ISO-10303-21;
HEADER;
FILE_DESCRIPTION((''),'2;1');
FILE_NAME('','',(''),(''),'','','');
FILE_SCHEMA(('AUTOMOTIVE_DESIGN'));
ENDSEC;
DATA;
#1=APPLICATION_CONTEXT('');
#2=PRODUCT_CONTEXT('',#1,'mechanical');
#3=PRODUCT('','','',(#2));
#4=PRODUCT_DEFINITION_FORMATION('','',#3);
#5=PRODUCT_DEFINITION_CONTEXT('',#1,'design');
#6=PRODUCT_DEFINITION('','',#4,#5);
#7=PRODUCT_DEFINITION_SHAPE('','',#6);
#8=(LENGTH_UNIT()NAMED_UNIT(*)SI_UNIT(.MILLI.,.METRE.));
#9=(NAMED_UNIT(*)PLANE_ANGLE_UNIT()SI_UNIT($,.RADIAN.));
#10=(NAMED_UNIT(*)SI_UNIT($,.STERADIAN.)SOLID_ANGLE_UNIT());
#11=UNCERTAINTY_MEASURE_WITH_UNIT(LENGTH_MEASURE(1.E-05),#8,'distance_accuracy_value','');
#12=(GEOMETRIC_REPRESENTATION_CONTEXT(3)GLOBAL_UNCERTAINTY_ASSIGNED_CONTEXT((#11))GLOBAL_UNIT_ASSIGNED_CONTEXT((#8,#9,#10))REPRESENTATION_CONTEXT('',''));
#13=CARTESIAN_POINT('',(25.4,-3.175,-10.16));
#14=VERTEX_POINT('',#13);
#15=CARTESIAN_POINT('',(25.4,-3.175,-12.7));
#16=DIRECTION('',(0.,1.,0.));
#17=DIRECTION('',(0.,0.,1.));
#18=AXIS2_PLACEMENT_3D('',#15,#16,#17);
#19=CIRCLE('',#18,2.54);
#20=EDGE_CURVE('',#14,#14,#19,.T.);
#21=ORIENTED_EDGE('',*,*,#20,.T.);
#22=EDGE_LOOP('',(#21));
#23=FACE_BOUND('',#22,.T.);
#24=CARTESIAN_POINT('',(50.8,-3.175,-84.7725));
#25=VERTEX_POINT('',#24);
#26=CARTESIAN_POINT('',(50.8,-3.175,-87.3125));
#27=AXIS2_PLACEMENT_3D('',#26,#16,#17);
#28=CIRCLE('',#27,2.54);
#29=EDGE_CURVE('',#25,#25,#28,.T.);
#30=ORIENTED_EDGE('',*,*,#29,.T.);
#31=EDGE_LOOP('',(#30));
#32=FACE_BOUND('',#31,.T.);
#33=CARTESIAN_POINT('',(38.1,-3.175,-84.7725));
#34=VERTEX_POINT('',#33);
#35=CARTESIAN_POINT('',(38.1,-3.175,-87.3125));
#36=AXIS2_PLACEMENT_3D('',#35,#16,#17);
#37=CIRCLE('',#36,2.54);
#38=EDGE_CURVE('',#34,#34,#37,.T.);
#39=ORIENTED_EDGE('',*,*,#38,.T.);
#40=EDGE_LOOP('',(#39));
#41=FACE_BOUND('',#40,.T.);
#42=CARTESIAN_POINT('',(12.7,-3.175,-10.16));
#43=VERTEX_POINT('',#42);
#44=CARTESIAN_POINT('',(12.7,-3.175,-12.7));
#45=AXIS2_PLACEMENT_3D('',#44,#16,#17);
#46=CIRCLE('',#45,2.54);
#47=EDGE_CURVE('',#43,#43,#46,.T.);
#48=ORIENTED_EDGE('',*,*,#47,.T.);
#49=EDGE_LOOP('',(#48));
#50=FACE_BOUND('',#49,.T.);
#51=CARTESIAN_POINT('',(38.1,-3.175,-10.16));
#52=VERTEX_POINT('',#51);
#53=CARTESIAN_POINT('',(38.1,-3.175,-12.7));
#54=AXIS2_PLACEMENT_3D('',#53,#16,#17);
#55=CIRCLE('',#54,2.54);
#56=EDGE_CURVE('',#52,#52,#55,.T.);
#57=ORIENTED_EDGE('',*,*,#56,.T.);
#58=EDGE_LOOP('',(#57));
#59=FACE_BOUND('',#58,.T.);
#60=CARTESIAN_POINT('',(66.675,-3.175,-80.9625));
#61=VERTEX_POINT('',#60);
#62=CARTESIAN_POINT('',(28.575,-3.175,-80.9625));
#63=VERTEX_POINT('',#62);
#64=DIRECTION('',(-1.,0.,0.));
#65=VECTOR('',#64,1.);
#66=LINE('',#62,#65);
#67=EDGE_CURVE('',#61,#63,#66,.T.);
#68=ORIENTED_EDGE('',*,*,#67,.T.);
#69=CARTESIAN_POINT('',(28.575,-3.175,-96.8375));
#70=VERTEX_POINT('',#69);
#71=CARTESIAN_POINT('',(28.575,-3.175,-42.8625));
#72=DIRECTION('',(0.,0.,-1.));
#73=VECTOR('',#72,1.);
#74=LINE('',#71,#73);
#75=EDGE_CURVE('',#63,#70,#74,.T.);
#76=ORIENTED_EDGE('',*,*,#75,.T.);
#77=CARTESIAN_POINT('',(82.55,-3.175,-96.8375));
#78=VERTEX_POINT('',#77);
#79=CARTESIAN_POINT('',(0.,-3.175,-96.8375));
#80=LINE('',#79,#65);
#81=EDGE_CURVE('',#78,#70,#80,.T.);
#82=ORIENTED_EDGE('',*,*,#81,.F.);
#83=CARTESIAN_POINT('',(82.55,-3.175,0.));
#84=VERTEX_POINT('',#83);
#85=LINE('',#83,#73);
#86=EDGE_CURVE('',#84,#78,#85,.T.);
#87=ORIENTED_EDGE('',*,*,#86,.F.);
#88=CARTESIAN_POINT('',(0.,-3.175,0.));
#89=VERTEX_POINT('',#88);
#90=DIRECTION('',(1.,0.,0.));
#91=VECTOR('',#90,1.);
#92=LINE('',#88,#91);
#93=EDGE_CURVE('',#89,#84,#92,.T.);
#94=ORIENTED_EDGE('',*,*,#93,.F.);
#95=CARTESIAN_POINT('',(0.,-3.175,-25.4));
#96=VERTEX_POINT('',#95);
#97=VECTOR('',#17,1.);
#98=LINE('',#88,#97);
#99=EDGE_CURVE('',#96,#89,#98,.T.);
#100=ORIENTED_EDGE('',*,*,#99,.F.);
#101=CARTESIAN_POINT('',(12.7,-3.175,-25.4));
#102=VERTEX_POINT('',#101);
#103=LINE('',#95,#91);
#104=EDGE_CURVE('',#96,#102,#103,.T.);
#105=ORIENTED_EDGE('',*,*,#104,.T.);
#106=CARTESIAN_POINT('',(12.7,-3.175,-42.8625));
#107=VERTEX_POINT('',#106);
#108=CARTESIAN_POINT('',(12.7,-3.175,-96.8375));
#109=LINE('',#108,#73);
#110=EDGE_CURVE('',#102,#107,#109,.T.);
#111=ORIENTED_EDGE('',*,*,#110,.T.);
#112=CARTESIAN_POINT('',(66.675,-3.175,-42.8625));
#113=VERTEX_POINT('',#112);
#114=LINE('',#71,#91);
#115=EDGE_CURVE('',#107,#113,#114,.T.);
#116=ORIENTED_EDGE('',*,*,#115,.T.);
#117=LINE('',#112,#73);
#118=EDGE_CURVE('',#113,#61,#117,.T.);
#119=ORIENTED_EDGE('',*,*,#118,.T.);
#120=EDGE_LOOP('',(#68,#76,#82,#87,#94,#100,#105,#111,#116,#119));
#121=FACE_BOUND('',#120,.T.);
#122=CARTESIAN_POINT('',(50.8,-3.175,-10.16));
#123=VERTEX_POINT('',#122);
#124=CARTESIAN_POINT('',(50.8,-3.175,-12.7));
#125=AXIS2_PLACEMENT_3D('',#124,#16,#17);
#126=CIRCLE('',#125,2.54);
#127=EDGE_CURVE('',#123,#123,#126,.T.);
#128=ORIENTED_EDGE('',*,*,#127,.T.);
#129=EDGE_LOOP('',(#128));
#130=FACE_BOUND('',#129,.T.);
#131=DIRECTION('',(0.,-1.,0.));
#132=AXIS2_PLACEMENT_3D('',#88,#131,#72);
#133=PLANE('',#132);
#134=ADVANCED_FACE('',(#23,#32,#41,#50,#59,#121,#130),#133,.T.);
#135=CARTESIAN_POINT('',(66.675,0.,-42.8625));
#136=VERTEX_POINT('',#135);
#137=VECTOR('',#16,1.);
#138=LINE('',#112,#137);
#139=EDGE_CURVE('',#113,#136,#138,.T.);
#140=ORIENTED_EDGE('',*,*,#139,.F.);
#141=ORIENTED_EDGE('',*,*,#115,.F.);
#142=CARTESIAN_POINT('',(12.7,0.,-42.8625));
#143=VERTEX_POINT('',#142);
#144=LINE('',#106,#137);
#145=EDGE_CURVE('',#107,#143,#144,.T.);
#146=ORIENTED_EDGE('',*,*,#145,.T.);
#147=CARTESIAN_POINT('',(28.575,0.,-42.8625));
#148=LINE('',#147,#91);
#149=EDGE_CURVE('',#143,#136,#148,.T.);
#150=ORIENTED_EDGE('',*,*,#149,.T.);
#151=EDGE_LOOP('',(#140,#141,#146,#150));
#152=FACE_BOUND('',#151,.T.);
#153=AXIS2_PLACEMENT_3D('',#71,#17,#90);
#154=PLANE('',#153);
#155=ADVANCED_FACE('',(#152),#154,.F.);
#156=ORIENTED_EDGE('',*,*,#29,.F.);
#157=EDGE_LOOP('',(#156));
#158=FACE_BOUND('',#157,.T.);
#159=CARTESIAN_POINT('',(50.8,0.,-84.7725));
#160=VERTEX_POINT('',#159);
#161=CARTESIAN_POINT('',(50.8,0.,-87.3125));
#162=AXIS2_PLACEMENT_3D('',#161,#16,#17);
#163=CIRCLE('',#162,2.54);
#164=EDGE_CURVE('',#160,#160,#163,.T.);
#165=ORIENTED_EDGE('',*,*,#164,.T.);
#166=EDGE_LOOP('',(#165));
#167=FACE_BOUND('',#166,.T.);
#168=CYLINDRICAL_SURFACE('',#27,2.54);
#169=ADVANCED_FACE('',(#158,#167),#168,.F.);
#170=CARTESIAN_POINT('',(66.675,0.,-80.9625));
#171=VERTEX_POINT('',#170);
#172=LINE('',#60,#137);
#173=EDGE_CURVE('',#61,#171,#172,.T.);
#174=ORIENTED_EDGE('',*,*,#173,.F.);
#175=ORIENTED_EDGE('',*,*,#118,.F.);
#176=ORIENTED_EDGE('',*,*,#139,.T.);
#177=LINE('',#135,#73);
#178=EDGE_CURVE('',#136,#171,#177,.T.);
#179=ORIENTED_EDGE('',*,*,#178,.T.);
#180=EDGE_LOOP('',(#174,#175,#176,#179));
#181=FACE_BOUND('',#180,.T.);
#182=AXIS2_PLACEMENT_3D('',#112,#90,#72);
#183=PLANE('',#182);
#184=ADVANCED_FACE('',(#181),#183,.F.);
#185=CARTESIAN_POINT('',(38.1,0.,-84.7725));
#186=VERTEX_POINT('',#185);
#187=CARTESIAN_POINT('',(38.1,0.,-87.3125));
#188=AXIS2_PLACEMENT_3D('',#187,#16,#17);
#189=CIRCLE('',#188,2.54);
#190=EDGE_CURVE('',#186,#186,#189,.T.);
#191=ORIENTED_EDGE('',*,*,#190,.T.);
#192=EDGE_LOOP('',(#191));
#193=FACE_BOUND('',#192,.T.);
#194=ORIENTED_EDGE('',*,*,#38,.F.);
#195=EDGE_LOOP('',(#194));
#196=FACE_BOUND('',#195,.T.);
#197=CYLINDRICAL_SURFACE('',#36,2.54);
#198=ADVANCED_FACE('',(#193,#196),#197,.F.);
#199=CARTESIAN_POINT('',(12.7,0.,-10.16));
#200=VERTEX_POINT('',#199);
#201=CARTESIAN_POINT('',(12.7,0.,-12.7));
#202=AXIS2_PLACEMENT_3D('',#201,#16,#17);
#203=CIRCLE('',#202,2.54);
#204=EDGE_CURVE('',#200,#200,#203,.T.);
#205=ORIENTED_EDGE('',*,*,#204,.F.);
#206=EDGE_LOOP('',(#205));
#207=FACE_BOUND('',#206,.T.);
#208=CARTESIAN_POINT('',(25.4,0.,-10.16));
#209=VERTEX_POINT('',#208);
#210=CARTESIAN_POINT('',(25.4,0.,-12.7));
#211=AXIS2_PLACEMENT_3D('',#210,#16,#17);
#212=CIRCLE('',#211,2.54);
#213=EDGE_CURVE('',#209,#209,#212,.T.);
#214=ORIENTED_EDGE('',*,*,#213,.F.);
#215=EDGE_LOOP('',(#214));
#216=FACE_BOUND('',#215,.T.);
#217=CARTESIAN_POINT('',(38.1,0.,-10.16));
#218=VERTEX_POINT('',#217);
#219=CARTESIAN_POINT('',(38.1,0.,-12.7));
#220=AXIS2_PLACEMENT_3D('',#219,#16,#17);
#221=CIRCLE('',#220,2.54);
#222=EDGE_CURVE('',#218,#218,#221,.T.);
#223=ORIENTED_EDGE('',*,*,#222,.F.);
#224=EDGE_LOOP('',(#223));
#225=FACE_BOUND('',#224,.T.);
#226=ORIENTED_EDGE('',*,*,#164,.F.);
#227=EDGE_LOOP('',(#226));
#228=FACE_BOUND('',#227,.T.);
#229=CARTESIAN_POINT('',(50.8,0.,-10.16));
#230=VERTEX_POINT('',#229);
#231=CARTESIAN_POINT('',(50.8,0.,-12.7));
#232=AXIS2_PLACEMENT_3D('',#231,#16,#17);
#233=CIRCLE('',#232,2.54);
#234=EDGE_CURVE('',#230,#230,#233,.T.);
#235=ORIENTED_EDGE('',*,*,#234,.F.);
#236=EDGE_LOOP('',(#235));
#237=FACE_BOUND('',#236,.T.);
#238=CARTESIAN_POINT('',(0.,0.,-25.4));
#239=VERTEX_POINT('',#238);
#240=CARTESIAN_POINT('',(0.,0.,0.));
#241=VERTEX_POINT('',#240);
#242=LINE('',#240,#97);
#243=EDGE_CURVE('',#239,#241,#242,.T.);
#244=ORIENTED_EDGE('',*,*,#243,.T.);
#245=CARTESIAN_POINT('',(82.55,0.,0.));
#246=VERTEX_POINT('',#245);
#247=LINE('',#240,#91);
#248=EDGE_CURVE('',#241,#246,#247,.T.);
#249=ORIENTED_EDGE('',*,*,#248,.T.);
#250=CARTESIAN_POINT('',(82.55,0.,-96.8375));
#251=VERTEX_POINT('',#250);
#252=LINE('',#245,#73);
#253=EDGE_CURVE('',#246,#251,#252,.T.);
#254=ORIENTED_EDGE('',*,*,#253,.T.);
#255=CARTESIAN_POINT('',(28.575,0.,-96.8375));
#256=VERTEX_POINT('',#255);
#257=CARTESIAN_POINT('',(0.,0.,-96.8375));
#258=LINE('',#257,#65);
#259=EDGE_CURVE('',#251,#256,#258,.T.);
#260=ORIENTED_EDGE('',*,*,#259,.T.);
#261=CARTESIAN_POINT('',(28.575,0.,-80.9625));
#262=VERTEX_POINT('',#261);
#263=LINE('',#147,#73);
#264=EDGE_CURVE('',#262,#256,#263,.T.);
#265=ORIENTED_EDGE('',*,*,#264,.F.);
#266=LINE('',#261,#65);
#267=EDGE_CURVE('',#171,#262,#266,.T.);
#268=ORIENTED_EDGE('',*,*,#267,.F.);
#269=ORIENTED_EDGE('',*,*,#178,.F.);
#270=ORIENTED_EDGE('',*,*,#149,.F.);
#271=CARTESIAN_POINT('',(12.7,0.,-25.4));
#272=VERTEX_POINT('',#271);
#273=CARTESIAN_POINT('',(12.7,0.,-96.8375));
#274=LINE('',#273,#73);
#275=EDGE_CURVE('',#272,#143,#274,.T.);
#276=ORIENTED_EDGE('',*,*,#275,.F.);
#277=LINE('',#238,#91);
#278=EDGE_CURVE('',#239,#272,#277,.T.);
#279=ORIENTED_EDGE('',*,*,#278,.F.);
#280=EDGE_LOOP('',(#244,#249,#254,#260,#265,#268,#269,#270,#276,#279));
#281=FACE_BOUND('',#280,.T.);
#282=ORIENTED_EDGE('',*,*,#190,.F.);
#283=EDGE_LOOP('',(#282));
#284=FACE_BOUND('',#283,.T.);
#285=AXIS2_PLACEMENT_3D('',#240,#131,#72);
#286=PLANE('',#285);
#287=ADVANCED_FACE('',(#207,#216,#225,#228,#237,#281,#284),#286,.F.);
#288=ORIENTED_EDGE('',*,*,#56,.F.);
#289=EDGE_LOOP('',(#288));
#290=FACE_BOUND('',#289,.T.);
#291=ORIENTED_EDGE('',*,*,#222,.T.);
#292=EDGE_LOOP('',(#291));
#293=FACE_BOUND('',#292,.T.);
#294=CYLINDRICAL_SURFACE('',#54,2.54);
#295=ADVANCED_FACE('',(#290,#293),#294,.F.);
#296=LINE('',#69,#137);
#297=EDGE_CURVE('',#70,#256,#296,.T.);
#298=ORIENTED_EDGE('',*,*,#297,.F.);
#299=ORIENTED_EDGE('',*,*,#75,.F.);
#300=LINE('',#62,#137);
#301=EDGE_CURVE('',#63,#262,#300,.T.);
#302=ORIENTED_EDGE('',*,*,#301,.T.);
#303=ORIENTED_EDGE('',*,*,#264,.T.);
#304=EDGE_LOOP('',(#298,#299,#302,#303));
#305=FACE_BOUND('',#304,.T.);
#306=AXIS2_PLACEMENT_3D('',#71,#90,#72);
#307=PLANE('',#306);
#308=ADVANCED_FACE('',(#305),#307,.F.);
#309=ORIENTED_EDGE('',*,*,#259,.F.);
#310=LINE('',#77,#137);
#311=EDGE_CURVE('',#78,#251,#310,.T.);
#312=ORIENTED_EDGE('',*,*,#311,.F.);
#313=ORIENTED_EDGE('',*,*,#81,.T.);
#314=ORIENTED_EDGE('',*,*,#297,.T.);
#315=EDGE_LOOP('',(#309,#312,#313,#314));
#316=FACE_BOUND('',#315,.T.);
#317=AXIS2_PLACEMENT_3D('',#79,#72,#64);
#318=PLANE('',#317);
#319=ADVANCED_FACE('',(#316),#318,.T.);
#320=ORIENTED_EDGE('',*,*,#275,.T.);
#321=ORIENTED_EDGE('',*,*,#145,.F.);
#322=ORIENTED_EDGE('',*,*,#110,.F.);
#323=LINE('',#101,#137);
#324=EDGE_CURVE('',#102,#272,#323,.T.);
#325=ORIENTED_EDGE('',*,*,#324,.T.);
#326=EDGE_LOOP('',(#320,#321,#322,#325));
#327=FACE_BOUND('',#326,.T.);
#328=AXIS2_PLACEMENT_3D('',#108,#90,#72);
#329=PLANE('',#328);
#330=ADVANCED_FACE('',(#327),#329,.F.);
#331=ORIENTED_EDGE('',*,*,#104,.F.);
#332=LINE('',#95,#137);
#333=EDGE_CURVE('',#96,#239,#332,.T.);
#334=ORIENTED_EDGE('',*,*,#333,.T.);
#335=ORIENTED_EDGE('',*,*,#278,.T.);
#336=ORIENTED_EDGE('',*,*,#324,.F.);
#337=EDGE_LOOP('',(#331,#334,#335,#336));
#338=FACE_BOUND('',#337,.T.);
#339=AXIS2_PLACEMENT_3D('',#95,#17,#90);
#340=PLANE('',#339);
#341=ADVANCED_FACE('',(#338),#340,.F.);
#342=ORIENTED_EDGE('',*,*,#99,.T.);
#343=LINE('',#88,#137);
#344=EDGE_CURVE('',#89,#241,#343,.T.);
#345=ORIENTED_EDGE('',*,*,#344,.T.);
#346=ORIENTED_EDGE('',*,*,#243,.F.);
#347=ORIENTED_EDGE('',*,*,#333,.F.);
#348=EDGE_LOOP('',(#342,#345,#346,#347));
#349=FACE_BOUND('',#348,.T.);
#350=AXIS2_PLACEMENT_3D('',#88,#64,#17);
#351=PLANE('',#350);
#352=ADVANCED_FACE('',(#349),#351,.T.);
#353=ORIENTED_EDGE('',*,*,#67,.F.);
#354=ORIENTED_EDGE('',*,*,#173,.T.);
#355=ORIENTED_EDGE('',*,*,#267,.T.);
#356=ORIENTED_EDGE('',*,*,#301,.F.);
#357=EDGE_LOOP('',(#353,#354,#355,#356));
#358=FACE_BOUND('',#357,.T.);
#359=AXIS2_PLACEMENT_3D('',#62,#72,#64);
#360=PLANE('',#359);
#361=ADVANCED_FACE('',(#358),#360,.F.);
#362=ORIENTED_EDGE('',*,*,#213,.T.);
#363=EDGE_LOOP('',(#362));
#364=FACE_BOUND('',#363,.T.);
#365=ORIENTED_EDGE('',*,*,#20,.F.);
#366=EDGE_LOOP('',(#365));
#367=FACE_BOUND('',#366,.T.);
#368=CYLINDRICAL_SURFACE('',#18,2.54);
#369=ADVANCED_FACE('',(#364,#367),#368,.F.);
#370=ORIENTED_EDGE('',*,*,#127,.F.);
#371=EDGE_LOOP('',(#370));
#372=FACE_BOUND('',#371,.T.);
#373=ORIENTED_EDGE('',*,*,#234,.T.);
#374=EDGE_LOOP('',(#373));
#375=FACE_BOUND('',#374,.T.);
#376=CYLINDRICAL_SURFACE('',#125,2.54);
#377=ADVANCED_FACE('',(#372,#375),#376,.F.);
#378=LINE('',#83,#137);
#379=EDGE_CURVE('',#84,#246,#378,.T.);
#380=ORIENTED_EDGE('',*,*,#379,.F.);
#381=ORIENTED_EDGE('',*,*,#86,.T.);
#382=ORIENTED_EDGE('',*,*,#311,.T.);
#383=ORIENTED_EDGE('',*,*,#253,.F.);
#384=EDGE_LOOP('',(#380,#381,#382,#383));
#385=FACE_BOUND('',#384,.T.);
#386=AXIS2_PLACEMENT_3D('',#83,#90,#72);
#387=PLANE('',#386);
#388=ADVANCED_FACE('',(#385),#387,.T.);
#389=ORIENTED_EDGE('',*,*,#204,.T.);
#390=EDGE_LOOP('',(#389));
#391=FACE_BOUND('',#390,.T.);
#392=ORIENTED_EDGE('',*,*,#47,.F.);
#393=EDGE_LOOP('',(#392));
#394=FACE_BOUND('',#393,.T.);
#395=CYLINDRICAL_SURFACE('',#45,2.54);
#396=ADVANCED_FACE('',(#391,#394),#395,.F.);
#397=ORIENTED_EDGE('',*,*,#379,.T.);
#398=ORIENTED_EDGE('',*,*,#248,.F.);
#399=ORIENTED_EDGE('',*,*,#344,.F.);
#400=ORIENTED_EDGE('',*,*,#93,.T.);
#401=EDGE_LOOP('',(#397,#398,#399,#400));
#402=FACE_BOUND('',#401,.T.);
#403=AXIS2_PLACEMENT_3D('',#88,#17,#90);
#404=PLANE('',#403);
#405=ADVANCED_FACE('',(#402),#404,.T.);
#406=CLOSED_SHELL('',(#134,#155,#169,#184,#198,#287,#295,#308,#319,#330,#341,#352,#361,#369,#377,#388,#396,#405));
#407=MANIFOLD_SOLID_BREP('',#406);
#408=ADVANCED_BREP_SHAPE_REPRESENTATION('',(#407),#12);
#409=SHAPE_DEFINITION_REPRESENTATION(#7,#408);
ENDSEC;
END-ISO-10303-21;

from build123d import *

# Parameters (mm, degrees)
SKETCH1_W          = 82.55
SKETCH1_H          = 96.8375
SKETCH1_W_2        = 38.1
SKETCH1_H_2        = 38.1
BASE_FLANGE2_DEPTH = 3.175
SKETCH3_W          = 12.7
SKETCH3_H          = 71.4375
CUT_EXTRUDE2_DEPTH = 128.287409162
SKETCH2_R          = 2.54
CUT_EXTRUDE1_DEPTH = 128.287409162
SKETCH5_W          = 15.875
SKETCH5_H          = 53.975
CUT_EXTRUDE6_DEPTH = 128.287409162
SKETCH7_R          = 2.54
CUT_EXTRUDE7_DEPTH = 128.287409162


# Sheet-metal steps are written as plain solids
with BuildPart() as part:
    # Base-Flange2: sheet metal written as solids
    # Sketch1 → Base-Flange2 (new body)
    with BuildSketch(Plane(origin=(0, 0, 0), x_dir=(1, 0, 0), z_dir=(0, 1, 0))):
        with Locations((41.275, 48.41875)):
            Rectangle(SKETCH1_W, SKETCH1_H)
        with Locations((47.625, 61.9125)):
            Rectangle(SKETCH1_W_2, SKETCH1_H_2, mode=Mode.SUBTRACT)
    extrude(amount=-BASE_FLANGE2_DEPTH)

    # Sketch3 → Cut-Extrude2 (cut, through all)
    with BuildSketch(Plane(origin=(0, 0, 0), x_dir=(1, 0, 0), z_dir=(0, 1, 0))):
        with Locations((6.35, 61.11875)):
            Rectangle(SKETCH3_W, SKETCH3_H)
    extrude(amount=-CUT_EXTRUDE2_DEPTH, mode=Mode.SUBTRACT)

    # Sketch2 → Cut-Extrude1 (cut, through all)
    with BuildSketch(Plane(origin=(0, 0, 0), x_dir=(1, 0, 0), z_dir=(0, 1, 0))):
        with Locations(Location((12.7, 12.7, 0), (0, 0, 270))):
            Circle(SKETCH2_R)
        with Locations(Location((25.4, 12.7, 0), (0, 0, 270))):
            Circle(SKETCH2_R)
        with Locations(Location((38.1, 12.7, 0), (0, 0, 270))):
            Circle(SKETCH2_R)
        with Locations(Location((50.8, 12.7, 0), (0, 0, 270))):
            Circle(SKETCH2_R)
    extrude(amount=-CUT_EXTRUDE1_DEPTH, mode=Mode.SUBTRACT)

    # Sketch5 → Cut-Extrude6 (cut, through all)
    with BuildSketch(Plane(origin=(0, 0, 0), x_dir=(1, 0, 0), z_dir=(0, 1, 0))):
        with Locations((20.6375, 69.85)):
            Rectangle(SKETCH5_W, SKETCH5_H)
    extrude(amount=-CUT_EXTRUDE6_DEPTH, mode=Mode.SUBTRACT)

    # Sketch7 → Cut-Extrude7 (cut, through all)
    with BuildSketch(Plane(origin=(0, 0, 0), x_dir=(1, 0, 0), z_dir=(0, 1, 0))):
        with Locations(Location((38.1, 87.3125, 0), (0, 0, 270))):
            Circle(SKETCH7_R)
        with Locations(Location((50.8, 87.3125, 0), (0, 0, 270))):
            Circle(SKETCH7_R)
    extrude(amount=-CUT_EXTRUDE7_DEPTH, mode=Mode.SUBTRACT)


solid = part.part
